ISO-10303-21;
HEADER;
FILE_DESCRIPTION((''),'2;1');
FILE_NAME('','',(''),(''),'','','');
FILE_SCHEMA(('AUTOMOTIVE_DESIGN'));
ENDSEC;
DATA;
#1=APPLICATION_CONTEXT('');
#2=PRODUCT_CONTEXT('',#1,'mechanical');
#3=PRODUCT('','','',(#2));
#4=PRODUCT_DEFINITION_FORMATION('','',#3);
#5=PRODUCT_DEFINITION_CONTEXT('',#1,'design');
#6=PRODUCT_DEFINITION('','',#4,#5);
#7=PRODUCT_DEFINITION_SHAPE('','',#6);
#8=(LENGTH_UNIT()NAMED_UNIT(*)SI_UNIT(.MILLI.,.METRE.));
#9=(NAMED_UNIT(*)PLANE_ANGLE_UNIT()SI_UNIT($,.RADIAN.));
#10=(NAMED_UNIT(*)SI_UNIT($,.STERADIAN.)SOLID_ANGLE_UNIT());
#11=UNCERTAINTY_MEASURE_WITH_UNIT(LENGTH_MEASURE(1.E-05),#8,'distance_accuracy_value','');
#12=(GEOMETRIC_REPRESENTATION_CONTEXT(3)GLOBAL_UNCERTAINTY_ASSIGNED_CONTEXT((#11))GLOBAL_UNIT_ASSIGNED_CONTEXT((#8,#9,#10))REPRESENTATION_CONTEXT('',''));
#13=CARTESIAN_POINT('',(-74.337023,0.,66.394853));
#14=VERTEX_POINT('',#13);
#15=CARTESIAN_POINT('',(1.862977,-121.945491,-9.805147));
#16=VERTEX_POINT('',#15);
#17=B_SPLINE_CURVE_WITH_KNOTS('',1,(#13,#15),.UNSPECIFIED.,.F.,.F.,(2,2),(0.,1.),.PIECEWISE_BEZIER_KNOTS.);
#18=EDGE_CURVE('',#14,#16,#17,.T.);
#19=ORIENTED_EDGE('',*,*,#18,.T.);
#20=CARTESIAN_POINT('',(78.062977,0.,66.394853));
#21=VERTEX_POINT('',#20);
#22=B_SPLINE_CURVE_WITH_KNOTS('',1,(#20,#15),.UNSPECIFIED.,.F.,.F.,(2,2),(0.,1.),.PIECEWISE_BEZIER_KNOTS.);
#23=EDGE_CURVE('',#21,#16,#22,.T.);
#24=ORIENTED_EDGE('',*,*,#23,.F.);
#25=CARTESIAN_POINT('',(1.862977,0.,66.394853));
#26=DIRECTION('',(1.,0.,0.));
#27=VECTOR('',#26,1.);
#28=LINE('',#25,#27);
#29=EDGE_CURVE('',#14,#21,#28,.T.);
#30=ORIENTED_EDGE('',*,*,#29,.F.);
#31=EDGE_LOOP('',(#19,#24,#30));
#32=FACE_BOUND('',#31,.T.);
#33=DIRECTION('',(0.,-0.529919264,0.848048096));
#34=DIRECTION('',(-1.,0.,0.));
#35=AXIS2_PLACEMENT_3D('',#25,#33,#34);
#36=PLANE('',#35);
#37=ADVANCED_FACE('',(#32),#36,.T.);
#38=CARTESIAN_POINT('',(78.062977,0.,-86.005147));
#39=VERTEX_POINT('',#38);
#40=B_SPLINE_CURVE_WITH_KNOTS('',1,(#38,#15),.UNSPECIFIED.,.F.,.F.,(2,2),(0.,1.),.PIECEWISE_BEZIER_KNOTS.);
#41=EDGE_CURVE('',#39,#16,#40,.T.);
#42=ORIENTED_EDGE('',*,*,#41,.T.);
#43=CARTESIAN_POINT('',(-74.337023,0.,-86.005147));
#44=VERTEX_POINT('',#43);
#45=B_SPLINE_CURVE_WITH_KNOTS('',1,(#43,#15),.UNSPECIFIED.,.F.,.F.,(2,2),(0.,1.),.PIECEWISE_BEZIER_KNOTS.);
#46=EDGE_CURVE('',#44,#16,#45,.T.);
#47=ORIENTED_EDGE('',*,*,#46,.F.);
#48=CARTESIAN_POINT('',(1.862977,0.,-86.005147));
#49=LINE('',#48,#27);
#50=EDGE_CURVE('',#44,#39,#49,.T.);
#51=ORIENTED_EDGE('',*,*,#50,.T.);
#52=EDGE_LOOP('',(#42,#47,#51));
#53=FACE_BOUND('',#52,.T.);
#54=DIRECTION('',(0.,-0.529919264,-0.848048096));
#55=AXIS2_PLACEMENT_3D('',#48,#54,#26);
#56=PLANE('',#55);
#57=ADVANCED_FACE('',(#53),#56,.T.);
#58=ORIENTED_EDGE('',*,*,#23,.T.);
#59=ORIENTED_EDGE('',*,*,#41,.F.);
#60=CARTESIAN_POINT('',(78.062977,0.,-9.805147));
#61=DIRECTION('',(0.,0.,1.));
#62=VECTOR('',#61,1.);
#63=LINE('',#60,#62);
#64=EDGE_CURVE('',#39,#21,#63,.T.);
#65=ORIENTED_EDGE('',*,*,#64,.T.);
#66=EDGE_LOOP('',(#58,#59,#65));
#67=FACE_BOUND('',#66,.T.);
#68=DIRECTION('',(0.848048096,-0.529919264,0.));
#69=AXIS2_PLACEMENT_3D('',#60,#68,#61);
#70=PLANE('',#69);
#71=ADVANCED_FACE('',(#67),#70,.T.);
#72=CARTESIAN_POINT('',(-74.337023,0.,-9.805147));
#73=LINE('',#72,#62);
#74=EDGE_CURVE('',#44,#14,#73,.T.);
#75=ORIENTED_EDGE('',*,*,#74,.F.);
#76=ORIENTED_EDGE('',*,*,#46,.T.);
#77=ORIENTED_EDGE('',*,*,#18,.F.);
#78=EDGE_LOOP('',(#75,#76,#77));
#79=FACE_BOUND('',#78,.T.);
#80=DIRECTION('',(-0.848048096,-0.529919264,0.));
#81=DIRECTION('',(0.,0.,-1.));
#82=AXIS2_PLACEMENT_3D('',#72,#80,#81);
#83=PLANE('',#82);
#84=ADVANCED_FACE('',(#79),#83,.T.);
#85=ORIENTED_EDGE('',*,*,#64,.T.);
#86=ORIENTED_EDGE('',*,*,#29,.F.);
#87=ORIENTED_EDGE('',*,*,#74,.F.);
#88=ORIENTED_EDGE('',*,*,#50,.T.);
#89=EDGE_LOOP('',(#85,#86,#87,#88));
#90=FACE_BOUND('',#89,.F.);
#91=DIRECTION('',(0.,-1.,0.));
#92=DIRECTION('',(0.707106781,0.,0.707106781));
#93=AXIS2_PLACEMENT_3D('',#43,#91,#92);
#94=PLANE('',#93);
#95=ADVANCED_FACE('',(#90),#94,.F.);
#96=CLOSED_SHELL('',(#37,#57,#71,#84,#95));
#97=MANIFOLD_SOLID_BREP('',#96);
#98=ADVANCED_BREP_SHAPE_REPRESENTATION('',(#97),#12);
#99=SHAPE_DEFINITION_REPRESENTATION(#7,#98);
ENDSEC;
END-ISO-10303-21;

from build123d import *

# Parameters (mm, degrees)
F0_W = 152.4
F0_H = 152.4


# Not quite as in the source:
# - an extrude whose draft closes it to a point is written as a loft to that point


with BuildPart() as f1:
    # F0 (on Front) → F1 section 0
    with BuildSketch(Plane.XZ, mode=Mode.PRIVATE) as f1_s0:
        with Locations((1.8629767001, -9.8051466048)):
            Rectangle(F0_W, F0_H)
    loft([f1_s0.sketch, Vertex(1.8629767001, -121.9454911129, -9.8051466048)], ruled=True)


solid = f1.part
